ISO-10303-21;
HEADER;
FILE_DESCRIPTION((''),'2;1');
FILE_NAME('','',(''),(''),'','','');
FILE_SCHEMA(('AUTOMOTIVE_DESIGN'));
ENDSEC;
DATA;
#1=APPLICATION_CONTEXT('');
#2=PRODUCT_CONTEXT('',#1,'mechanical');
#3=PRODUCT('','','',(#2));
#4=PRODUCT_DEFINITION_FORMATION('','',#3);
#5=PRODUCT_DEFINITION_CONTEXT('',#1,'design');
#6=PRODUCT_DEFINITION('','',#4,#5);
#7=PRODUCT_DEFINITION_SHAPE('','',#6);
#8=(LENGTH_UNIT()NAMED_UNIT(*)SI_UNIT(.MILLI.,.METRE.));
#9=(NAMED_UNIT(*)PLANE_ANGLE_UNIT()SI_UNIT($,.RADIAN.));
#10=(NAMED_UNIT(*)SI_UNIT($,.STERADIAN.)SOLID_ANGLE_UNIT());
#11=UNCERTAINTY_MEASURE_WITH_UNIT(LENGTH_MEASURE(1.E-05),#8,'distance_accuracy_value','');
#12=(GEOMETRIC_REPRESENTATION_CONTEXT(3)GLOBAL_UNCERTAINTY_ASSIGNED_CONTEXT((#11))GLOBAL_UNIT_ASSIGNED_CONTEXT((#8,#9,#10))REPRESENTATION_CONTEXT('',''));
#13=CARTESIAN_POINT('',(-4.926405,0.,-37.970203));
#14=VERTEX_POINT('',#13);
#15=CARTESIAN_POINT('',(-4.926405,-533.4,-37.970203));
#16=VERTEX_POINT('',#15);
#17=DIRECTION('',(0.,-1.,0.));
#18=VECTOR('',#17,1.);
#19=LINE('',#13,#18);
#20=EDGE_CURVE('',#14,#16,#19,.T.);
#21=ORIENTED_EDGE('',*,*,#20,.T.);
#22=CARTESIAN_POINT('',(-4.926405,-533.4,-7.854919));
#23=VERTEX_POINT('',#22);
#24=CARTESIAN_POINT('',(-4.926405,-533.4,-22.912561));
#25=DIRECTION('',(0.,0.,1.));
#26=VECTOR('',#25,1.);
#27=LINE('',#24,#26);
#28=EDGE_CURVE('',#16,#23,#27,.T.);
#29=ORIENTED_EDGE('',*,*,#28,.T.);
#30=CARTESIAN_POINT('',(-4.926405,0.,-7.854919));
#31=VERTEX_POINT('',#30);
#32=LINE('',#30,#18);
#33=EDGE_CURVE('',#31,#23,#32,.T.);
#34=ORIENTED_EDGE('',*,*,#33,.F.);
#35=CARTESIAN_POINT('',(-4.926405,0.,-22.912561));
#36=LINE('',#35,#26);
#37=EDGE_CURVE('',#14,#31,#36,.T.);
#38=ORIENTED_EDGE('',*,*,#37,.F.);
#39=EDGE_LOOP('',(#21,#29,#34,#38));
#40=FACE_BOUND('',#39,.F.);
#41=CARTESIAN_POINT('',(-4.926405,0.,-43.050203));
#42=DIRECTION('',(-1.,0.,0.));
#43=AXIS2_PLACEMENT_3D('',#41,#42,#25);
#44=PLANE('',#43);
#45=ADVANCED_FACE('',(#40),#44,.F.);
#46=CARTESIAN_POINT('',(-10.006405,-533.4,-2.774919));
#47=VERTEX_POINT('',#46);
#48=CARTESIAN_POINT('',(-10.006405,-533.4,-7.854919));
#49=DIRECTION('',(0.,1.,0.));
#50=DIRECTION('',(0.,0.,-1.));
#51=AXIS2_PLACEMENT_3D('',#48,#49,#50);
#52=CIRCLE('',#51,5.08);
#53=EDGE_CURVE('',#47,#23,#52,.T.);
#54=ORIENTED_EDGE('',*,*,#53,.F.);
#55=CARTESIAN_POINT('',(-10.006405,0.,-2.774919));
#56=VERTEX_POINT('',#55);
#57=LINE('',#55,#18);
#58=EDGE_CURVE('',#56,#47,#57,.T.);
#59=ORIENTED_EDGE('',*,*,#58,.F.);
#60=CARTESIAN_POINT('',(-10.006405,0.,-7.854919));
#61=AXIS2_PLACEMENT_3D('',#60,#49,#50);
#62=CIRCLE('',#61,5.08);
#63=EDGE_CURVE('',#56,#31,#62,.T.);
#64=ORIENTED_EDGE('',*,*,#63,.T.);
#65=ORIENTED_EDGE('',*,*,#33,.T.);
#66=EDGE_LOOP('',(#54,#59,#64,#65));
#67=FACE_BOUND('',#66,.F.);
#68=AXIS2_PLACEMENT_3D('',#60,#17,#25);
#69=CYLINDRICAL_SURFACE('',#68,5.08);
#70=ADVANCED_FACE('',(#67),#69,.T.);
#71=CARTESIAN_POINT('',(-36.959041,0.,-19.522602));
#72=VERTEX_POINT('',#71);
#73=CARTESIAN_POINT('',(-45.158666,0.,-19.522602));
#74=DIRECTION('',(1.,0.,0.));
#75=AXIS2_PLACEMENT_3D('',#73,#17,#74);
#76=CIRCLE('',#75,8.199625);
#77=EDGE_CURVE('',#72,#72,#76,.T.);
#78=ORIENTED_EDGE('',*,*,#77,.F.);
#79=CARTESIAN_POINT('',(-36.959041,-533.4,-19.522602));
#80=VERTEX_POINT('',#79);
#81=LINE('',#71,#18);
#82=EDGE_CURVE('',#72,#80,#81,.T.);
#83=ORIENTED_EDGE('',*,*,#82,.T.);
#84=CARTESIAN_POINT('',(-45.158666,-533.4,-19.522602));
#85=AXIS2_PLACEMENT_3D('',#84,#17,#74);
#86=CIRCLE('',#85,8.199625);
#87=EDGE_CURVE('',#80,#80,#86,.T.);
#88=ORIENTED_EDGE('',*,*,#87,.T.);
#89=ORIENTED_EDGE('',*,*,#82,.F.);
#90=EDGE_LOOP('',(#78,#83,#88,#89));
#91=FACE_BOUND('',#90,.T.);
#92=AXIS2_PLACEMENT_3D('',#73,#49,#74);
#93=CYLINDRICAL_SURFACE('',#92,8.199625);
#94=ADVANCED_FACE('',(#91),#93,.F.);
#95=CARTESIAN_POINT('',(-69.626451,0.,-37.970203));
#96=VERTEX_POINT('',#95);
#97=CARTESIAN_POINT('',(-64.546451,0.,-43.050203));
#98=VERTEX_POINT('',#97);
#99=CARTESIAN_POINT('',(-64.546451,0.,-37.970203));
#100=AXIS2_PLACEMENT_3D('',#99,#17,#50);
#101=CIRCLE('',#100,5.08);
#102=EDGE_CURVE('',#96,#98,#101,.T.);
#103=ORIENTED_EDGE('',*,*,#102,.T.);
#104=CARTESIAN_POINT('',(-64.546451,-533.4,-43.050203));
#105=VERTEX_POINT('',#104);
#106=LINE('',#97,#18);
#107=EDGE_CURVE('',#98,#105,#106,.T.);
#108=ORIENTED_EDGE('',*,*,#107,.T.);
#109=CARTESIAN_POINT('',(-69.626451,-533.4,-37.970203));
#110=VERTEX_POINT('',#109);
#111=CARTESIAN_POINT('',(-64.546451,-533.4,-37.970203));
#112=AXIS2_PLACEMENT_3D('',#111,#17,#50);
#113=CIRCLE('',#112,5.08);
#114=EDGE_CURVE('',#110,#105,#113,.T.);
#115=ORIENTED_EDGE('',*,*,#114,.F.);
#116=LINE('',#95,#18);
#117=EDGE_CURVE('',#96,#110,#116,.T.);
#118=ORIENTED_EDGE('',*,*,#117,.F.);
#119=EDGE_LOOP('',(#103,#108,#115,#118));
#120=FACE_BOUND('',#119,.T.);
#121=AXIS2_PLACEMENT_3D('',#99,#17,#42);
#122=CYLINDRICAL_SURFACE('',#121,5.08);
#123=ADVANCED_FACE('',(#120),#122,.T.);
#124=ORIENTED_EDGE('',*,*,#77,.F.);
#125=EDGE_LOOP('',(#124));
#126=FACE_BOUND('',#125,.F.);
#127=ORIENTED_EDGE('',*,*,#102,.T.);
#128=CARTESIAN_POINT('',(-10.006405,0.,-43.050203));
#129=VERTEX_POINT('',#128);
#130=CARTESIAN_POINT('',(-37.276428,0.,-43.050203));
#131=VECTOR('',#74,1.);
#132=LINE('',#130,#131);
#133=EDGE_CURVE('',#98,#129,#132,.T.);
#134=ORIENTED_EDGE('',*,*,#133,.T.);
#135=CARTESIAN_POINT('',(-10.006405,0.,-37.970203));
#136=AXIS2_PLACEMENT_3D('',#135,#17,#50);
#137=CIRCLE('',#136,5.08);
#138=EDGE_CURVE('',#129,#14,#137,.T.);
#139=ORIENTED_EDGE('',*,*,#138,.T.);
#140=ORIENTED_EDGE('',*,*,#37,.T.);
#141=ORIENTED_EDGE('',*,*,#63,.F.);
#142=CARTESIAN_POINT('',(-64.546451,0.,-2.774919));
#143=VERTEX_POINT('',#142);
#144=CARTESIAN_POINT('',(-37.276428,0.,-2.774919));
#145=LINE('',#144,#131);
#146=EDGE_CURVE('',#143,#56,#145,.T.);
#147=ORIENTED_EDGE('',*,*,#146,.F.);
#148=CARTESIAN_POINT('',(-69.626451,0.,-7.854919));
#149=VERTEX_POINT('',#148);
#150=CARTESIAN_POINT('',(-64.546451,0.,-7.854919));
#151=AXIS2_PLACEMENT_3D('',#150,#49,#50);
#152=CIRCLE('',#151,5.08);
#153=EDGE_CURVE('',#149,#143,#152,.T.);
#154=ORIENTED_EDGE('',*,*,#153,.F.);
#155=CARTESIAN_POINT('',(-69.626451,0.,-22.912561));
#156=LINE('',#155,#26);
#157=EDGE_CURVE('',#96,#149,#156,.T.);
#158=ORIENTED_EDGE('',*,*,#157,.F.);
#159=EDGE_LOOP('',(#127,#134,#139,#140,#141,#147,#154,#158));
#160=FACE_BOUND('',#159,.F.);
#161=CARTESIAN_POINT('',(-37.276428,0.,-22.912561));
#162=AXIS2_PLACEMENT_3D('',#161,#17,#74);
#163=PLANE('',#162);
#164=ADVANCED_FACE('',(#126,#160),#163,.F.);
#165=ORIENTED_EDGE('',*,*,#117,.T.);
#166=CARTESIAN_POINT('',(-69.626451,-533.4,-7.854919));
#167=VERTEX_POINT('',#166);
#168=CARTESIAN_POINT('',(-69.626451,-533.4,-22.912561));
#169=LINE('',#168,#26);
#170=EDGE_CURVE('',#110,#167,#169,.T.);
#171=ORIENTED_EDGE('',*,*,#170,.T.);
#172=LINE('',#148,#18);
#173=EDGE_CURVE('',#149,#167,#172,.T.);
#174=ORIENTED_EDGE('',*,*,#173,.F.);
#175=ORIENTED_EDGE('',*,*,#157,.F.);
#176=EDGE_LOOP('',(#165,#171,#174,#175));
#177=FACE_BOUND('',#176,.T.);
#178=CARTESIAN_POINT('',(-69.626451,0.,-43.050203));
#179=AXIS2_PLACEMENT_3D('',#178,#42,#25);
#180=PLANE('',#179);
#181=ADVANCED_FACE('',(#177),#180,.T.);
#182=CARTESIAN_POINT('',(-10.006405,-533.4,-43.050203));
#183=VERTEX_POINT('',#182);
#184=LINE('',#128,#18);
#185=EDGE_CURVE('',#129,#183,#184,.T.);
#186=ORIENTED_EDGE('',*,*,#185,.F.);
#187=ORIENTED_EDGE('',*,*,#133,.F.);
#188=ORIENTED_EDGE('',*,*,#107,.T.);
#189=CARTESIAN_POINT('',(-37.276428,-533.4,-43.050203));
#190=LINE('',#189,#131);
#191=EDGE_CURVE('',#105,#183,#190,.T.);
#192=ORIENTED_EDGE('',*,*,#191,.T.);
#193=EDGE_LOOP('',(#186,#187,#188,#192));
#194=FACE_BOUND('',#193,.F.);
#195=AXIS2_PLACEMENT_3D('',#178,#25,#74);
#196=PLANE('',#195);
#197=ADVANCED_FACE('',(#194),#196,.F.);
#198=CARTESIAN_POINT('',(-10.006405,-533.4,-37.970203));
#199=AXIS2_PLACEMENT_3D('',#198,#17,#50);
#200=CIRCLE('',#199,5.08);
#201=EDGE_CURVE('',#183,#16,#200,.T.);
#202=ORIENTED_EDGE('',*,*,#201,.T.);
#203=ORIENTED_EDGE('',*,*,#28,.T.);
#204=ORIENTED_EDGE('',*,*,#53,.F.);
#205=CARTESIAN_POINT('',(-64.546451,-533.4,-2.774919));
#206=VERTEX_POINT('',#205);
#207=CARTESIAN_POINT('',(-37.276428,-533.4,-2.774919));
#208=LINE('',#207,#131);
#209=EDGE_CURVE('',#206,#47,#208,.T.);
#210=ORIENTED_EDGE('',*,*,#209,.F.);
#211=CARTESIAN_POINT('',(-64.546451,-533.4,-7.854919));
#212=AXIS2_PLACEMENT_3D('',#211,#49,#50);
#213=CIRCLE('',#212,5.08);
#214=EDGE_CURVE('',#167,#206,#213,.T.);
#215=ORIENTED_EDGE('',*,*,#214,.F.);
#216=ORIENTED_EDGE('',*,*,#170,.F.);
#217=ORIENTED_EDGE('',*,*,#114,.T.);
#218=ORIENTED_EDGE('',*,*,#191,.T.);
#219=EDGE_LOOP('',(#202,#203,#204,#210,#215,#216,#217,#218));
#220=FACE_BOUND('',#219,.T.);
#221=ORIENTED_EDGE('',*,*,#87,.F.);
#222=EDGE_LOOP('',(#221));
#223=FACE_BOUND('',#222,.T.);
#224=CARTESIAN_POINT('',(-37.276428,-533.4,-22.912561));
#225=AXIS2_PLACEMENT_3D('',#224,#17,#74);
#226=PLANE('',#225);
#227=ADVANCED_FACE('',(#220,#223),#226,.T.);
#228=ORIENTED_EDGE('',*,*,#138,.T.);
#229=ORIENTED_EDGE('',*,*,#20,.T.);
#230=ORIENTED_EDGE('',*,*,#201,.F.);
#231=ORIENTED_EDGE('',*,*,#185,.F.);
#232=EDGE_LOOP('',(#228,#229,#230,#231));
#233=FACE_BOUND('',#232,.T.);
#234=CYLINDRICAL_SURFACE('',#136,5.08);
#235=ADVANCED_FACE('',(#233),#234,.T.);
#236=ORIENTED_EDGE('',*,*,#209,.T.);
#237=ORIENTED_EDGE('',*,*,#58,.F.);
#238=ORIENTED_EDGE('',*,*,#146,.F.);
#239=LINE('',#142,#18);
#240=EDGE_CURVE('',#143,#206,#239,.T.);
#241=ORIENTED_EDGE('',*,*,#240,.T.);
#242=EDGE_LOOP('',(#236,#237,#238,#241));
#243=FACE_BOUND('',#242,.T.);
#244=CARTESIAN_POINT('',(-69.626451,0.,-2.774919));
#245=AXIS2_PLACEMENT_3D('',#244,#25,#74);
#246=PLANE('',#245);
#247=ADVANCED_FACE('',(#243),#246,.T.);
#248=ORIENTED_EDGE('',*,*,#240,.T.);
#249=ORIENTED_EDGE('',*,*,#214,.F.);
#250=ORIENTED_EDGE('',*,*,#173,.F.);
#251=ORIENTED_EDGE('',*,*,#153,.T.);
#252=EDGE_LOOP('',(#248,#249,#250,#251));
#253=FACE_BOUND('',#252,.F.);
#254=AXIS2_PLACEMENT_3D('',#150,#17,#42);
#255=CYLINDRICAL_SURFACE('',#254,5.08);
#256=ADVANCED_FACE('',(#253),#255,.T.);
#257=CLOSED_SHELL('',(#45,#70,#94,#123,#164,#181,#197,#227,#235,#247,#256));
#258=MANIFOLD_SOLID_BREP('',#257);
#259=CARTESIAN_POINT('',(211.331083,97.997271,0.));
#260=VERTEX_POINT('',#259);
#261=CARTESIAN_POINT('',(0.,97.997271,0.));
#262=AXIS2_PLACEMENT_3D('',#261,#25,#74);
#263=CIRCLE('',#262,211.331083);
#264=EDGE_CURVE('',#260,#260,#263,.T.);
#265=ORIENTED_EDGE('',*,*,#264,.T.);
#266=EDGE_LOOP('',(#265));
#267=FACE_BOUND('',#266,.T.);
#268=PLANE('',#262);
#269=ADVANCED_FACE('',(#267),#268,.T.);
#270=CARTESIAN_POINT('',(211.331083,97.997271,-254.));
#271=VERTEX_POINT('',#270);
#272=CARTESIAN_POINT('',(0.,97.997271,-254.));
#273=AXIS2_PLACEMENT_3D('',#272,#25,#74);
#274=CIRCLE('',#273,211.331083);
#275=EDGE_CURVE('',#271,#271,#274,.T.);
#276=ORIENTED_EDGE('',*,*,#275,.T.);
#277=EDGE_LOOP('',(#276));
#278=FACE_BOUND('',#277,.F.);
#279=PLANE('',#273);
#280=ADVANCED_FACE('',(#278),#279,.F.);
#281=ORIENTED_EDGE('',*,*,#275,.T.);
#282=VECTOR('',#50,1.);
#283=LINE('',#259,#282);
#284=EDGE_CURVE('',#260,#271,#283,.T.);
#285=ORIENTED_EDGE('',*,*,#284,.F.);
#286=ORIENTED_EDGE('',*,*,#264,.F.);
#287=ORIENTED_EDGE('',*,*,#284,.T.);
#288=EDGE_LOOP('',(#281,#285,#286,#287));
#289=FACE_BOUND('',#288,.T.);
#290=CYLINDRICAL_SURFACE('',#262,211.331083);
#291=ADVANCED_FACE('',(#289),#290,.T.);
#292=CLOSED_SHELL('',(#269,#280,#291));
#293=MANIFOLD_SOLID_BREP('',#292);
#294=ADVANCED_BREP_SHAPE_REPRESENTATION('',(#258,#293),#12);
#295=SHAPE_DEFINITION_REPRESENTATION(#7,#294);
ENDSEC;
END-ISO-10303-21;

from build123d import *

# Parameters (mm, degrees)
F0_W     = 64.7000456229
F0_H     = 40.2752840891
F0_R     = 8.1996249531
F1_DEPTH = 533.4
F2_R     = 5.08
F3_R     = 211.3310828814
F4_DEPTH = 254


# Not quite as in the source:
# - a feature names something its author has since deleted; it is built from what else it names


with BuildPart() as f1:
    # F0 (on Front) → F1 (new body)
    with BuildSketch(Plane.XZ):
        with Locations((-37.2764277272, -22.9125614278)):
            Rectangle(F0_W, F0_H)
        with Locations((-45.1586656272, -19.5226017386)):
            Circle(F0_R, mode=Mode.SUBTRACT)
    extrude(amount=F1_DEPTH)

    # F2
    f2_edges = [f1.edges().sort_by_distance(p)[0] for p in [
        (-4.926405, -266.7, -2.774919),
        (-4.926405, -266.7, -43.050203),
        (-69.626451, -266.7, -2.774919),
        (-69.626451, -266.7, -43.050203),
    ]]
    fillet(f2_edges, radius=F2_R)


with BuildPart() as f4:
    # F3 (on Top) → F4 (new body)
    with BuildSketch(Plane.XY):
        with Locations((0, 97.9972705245)):
            Circle(F3_R)
    extrude(amount=-F4_DEPTH)


solid = Compound([f1.part, f4.part])
